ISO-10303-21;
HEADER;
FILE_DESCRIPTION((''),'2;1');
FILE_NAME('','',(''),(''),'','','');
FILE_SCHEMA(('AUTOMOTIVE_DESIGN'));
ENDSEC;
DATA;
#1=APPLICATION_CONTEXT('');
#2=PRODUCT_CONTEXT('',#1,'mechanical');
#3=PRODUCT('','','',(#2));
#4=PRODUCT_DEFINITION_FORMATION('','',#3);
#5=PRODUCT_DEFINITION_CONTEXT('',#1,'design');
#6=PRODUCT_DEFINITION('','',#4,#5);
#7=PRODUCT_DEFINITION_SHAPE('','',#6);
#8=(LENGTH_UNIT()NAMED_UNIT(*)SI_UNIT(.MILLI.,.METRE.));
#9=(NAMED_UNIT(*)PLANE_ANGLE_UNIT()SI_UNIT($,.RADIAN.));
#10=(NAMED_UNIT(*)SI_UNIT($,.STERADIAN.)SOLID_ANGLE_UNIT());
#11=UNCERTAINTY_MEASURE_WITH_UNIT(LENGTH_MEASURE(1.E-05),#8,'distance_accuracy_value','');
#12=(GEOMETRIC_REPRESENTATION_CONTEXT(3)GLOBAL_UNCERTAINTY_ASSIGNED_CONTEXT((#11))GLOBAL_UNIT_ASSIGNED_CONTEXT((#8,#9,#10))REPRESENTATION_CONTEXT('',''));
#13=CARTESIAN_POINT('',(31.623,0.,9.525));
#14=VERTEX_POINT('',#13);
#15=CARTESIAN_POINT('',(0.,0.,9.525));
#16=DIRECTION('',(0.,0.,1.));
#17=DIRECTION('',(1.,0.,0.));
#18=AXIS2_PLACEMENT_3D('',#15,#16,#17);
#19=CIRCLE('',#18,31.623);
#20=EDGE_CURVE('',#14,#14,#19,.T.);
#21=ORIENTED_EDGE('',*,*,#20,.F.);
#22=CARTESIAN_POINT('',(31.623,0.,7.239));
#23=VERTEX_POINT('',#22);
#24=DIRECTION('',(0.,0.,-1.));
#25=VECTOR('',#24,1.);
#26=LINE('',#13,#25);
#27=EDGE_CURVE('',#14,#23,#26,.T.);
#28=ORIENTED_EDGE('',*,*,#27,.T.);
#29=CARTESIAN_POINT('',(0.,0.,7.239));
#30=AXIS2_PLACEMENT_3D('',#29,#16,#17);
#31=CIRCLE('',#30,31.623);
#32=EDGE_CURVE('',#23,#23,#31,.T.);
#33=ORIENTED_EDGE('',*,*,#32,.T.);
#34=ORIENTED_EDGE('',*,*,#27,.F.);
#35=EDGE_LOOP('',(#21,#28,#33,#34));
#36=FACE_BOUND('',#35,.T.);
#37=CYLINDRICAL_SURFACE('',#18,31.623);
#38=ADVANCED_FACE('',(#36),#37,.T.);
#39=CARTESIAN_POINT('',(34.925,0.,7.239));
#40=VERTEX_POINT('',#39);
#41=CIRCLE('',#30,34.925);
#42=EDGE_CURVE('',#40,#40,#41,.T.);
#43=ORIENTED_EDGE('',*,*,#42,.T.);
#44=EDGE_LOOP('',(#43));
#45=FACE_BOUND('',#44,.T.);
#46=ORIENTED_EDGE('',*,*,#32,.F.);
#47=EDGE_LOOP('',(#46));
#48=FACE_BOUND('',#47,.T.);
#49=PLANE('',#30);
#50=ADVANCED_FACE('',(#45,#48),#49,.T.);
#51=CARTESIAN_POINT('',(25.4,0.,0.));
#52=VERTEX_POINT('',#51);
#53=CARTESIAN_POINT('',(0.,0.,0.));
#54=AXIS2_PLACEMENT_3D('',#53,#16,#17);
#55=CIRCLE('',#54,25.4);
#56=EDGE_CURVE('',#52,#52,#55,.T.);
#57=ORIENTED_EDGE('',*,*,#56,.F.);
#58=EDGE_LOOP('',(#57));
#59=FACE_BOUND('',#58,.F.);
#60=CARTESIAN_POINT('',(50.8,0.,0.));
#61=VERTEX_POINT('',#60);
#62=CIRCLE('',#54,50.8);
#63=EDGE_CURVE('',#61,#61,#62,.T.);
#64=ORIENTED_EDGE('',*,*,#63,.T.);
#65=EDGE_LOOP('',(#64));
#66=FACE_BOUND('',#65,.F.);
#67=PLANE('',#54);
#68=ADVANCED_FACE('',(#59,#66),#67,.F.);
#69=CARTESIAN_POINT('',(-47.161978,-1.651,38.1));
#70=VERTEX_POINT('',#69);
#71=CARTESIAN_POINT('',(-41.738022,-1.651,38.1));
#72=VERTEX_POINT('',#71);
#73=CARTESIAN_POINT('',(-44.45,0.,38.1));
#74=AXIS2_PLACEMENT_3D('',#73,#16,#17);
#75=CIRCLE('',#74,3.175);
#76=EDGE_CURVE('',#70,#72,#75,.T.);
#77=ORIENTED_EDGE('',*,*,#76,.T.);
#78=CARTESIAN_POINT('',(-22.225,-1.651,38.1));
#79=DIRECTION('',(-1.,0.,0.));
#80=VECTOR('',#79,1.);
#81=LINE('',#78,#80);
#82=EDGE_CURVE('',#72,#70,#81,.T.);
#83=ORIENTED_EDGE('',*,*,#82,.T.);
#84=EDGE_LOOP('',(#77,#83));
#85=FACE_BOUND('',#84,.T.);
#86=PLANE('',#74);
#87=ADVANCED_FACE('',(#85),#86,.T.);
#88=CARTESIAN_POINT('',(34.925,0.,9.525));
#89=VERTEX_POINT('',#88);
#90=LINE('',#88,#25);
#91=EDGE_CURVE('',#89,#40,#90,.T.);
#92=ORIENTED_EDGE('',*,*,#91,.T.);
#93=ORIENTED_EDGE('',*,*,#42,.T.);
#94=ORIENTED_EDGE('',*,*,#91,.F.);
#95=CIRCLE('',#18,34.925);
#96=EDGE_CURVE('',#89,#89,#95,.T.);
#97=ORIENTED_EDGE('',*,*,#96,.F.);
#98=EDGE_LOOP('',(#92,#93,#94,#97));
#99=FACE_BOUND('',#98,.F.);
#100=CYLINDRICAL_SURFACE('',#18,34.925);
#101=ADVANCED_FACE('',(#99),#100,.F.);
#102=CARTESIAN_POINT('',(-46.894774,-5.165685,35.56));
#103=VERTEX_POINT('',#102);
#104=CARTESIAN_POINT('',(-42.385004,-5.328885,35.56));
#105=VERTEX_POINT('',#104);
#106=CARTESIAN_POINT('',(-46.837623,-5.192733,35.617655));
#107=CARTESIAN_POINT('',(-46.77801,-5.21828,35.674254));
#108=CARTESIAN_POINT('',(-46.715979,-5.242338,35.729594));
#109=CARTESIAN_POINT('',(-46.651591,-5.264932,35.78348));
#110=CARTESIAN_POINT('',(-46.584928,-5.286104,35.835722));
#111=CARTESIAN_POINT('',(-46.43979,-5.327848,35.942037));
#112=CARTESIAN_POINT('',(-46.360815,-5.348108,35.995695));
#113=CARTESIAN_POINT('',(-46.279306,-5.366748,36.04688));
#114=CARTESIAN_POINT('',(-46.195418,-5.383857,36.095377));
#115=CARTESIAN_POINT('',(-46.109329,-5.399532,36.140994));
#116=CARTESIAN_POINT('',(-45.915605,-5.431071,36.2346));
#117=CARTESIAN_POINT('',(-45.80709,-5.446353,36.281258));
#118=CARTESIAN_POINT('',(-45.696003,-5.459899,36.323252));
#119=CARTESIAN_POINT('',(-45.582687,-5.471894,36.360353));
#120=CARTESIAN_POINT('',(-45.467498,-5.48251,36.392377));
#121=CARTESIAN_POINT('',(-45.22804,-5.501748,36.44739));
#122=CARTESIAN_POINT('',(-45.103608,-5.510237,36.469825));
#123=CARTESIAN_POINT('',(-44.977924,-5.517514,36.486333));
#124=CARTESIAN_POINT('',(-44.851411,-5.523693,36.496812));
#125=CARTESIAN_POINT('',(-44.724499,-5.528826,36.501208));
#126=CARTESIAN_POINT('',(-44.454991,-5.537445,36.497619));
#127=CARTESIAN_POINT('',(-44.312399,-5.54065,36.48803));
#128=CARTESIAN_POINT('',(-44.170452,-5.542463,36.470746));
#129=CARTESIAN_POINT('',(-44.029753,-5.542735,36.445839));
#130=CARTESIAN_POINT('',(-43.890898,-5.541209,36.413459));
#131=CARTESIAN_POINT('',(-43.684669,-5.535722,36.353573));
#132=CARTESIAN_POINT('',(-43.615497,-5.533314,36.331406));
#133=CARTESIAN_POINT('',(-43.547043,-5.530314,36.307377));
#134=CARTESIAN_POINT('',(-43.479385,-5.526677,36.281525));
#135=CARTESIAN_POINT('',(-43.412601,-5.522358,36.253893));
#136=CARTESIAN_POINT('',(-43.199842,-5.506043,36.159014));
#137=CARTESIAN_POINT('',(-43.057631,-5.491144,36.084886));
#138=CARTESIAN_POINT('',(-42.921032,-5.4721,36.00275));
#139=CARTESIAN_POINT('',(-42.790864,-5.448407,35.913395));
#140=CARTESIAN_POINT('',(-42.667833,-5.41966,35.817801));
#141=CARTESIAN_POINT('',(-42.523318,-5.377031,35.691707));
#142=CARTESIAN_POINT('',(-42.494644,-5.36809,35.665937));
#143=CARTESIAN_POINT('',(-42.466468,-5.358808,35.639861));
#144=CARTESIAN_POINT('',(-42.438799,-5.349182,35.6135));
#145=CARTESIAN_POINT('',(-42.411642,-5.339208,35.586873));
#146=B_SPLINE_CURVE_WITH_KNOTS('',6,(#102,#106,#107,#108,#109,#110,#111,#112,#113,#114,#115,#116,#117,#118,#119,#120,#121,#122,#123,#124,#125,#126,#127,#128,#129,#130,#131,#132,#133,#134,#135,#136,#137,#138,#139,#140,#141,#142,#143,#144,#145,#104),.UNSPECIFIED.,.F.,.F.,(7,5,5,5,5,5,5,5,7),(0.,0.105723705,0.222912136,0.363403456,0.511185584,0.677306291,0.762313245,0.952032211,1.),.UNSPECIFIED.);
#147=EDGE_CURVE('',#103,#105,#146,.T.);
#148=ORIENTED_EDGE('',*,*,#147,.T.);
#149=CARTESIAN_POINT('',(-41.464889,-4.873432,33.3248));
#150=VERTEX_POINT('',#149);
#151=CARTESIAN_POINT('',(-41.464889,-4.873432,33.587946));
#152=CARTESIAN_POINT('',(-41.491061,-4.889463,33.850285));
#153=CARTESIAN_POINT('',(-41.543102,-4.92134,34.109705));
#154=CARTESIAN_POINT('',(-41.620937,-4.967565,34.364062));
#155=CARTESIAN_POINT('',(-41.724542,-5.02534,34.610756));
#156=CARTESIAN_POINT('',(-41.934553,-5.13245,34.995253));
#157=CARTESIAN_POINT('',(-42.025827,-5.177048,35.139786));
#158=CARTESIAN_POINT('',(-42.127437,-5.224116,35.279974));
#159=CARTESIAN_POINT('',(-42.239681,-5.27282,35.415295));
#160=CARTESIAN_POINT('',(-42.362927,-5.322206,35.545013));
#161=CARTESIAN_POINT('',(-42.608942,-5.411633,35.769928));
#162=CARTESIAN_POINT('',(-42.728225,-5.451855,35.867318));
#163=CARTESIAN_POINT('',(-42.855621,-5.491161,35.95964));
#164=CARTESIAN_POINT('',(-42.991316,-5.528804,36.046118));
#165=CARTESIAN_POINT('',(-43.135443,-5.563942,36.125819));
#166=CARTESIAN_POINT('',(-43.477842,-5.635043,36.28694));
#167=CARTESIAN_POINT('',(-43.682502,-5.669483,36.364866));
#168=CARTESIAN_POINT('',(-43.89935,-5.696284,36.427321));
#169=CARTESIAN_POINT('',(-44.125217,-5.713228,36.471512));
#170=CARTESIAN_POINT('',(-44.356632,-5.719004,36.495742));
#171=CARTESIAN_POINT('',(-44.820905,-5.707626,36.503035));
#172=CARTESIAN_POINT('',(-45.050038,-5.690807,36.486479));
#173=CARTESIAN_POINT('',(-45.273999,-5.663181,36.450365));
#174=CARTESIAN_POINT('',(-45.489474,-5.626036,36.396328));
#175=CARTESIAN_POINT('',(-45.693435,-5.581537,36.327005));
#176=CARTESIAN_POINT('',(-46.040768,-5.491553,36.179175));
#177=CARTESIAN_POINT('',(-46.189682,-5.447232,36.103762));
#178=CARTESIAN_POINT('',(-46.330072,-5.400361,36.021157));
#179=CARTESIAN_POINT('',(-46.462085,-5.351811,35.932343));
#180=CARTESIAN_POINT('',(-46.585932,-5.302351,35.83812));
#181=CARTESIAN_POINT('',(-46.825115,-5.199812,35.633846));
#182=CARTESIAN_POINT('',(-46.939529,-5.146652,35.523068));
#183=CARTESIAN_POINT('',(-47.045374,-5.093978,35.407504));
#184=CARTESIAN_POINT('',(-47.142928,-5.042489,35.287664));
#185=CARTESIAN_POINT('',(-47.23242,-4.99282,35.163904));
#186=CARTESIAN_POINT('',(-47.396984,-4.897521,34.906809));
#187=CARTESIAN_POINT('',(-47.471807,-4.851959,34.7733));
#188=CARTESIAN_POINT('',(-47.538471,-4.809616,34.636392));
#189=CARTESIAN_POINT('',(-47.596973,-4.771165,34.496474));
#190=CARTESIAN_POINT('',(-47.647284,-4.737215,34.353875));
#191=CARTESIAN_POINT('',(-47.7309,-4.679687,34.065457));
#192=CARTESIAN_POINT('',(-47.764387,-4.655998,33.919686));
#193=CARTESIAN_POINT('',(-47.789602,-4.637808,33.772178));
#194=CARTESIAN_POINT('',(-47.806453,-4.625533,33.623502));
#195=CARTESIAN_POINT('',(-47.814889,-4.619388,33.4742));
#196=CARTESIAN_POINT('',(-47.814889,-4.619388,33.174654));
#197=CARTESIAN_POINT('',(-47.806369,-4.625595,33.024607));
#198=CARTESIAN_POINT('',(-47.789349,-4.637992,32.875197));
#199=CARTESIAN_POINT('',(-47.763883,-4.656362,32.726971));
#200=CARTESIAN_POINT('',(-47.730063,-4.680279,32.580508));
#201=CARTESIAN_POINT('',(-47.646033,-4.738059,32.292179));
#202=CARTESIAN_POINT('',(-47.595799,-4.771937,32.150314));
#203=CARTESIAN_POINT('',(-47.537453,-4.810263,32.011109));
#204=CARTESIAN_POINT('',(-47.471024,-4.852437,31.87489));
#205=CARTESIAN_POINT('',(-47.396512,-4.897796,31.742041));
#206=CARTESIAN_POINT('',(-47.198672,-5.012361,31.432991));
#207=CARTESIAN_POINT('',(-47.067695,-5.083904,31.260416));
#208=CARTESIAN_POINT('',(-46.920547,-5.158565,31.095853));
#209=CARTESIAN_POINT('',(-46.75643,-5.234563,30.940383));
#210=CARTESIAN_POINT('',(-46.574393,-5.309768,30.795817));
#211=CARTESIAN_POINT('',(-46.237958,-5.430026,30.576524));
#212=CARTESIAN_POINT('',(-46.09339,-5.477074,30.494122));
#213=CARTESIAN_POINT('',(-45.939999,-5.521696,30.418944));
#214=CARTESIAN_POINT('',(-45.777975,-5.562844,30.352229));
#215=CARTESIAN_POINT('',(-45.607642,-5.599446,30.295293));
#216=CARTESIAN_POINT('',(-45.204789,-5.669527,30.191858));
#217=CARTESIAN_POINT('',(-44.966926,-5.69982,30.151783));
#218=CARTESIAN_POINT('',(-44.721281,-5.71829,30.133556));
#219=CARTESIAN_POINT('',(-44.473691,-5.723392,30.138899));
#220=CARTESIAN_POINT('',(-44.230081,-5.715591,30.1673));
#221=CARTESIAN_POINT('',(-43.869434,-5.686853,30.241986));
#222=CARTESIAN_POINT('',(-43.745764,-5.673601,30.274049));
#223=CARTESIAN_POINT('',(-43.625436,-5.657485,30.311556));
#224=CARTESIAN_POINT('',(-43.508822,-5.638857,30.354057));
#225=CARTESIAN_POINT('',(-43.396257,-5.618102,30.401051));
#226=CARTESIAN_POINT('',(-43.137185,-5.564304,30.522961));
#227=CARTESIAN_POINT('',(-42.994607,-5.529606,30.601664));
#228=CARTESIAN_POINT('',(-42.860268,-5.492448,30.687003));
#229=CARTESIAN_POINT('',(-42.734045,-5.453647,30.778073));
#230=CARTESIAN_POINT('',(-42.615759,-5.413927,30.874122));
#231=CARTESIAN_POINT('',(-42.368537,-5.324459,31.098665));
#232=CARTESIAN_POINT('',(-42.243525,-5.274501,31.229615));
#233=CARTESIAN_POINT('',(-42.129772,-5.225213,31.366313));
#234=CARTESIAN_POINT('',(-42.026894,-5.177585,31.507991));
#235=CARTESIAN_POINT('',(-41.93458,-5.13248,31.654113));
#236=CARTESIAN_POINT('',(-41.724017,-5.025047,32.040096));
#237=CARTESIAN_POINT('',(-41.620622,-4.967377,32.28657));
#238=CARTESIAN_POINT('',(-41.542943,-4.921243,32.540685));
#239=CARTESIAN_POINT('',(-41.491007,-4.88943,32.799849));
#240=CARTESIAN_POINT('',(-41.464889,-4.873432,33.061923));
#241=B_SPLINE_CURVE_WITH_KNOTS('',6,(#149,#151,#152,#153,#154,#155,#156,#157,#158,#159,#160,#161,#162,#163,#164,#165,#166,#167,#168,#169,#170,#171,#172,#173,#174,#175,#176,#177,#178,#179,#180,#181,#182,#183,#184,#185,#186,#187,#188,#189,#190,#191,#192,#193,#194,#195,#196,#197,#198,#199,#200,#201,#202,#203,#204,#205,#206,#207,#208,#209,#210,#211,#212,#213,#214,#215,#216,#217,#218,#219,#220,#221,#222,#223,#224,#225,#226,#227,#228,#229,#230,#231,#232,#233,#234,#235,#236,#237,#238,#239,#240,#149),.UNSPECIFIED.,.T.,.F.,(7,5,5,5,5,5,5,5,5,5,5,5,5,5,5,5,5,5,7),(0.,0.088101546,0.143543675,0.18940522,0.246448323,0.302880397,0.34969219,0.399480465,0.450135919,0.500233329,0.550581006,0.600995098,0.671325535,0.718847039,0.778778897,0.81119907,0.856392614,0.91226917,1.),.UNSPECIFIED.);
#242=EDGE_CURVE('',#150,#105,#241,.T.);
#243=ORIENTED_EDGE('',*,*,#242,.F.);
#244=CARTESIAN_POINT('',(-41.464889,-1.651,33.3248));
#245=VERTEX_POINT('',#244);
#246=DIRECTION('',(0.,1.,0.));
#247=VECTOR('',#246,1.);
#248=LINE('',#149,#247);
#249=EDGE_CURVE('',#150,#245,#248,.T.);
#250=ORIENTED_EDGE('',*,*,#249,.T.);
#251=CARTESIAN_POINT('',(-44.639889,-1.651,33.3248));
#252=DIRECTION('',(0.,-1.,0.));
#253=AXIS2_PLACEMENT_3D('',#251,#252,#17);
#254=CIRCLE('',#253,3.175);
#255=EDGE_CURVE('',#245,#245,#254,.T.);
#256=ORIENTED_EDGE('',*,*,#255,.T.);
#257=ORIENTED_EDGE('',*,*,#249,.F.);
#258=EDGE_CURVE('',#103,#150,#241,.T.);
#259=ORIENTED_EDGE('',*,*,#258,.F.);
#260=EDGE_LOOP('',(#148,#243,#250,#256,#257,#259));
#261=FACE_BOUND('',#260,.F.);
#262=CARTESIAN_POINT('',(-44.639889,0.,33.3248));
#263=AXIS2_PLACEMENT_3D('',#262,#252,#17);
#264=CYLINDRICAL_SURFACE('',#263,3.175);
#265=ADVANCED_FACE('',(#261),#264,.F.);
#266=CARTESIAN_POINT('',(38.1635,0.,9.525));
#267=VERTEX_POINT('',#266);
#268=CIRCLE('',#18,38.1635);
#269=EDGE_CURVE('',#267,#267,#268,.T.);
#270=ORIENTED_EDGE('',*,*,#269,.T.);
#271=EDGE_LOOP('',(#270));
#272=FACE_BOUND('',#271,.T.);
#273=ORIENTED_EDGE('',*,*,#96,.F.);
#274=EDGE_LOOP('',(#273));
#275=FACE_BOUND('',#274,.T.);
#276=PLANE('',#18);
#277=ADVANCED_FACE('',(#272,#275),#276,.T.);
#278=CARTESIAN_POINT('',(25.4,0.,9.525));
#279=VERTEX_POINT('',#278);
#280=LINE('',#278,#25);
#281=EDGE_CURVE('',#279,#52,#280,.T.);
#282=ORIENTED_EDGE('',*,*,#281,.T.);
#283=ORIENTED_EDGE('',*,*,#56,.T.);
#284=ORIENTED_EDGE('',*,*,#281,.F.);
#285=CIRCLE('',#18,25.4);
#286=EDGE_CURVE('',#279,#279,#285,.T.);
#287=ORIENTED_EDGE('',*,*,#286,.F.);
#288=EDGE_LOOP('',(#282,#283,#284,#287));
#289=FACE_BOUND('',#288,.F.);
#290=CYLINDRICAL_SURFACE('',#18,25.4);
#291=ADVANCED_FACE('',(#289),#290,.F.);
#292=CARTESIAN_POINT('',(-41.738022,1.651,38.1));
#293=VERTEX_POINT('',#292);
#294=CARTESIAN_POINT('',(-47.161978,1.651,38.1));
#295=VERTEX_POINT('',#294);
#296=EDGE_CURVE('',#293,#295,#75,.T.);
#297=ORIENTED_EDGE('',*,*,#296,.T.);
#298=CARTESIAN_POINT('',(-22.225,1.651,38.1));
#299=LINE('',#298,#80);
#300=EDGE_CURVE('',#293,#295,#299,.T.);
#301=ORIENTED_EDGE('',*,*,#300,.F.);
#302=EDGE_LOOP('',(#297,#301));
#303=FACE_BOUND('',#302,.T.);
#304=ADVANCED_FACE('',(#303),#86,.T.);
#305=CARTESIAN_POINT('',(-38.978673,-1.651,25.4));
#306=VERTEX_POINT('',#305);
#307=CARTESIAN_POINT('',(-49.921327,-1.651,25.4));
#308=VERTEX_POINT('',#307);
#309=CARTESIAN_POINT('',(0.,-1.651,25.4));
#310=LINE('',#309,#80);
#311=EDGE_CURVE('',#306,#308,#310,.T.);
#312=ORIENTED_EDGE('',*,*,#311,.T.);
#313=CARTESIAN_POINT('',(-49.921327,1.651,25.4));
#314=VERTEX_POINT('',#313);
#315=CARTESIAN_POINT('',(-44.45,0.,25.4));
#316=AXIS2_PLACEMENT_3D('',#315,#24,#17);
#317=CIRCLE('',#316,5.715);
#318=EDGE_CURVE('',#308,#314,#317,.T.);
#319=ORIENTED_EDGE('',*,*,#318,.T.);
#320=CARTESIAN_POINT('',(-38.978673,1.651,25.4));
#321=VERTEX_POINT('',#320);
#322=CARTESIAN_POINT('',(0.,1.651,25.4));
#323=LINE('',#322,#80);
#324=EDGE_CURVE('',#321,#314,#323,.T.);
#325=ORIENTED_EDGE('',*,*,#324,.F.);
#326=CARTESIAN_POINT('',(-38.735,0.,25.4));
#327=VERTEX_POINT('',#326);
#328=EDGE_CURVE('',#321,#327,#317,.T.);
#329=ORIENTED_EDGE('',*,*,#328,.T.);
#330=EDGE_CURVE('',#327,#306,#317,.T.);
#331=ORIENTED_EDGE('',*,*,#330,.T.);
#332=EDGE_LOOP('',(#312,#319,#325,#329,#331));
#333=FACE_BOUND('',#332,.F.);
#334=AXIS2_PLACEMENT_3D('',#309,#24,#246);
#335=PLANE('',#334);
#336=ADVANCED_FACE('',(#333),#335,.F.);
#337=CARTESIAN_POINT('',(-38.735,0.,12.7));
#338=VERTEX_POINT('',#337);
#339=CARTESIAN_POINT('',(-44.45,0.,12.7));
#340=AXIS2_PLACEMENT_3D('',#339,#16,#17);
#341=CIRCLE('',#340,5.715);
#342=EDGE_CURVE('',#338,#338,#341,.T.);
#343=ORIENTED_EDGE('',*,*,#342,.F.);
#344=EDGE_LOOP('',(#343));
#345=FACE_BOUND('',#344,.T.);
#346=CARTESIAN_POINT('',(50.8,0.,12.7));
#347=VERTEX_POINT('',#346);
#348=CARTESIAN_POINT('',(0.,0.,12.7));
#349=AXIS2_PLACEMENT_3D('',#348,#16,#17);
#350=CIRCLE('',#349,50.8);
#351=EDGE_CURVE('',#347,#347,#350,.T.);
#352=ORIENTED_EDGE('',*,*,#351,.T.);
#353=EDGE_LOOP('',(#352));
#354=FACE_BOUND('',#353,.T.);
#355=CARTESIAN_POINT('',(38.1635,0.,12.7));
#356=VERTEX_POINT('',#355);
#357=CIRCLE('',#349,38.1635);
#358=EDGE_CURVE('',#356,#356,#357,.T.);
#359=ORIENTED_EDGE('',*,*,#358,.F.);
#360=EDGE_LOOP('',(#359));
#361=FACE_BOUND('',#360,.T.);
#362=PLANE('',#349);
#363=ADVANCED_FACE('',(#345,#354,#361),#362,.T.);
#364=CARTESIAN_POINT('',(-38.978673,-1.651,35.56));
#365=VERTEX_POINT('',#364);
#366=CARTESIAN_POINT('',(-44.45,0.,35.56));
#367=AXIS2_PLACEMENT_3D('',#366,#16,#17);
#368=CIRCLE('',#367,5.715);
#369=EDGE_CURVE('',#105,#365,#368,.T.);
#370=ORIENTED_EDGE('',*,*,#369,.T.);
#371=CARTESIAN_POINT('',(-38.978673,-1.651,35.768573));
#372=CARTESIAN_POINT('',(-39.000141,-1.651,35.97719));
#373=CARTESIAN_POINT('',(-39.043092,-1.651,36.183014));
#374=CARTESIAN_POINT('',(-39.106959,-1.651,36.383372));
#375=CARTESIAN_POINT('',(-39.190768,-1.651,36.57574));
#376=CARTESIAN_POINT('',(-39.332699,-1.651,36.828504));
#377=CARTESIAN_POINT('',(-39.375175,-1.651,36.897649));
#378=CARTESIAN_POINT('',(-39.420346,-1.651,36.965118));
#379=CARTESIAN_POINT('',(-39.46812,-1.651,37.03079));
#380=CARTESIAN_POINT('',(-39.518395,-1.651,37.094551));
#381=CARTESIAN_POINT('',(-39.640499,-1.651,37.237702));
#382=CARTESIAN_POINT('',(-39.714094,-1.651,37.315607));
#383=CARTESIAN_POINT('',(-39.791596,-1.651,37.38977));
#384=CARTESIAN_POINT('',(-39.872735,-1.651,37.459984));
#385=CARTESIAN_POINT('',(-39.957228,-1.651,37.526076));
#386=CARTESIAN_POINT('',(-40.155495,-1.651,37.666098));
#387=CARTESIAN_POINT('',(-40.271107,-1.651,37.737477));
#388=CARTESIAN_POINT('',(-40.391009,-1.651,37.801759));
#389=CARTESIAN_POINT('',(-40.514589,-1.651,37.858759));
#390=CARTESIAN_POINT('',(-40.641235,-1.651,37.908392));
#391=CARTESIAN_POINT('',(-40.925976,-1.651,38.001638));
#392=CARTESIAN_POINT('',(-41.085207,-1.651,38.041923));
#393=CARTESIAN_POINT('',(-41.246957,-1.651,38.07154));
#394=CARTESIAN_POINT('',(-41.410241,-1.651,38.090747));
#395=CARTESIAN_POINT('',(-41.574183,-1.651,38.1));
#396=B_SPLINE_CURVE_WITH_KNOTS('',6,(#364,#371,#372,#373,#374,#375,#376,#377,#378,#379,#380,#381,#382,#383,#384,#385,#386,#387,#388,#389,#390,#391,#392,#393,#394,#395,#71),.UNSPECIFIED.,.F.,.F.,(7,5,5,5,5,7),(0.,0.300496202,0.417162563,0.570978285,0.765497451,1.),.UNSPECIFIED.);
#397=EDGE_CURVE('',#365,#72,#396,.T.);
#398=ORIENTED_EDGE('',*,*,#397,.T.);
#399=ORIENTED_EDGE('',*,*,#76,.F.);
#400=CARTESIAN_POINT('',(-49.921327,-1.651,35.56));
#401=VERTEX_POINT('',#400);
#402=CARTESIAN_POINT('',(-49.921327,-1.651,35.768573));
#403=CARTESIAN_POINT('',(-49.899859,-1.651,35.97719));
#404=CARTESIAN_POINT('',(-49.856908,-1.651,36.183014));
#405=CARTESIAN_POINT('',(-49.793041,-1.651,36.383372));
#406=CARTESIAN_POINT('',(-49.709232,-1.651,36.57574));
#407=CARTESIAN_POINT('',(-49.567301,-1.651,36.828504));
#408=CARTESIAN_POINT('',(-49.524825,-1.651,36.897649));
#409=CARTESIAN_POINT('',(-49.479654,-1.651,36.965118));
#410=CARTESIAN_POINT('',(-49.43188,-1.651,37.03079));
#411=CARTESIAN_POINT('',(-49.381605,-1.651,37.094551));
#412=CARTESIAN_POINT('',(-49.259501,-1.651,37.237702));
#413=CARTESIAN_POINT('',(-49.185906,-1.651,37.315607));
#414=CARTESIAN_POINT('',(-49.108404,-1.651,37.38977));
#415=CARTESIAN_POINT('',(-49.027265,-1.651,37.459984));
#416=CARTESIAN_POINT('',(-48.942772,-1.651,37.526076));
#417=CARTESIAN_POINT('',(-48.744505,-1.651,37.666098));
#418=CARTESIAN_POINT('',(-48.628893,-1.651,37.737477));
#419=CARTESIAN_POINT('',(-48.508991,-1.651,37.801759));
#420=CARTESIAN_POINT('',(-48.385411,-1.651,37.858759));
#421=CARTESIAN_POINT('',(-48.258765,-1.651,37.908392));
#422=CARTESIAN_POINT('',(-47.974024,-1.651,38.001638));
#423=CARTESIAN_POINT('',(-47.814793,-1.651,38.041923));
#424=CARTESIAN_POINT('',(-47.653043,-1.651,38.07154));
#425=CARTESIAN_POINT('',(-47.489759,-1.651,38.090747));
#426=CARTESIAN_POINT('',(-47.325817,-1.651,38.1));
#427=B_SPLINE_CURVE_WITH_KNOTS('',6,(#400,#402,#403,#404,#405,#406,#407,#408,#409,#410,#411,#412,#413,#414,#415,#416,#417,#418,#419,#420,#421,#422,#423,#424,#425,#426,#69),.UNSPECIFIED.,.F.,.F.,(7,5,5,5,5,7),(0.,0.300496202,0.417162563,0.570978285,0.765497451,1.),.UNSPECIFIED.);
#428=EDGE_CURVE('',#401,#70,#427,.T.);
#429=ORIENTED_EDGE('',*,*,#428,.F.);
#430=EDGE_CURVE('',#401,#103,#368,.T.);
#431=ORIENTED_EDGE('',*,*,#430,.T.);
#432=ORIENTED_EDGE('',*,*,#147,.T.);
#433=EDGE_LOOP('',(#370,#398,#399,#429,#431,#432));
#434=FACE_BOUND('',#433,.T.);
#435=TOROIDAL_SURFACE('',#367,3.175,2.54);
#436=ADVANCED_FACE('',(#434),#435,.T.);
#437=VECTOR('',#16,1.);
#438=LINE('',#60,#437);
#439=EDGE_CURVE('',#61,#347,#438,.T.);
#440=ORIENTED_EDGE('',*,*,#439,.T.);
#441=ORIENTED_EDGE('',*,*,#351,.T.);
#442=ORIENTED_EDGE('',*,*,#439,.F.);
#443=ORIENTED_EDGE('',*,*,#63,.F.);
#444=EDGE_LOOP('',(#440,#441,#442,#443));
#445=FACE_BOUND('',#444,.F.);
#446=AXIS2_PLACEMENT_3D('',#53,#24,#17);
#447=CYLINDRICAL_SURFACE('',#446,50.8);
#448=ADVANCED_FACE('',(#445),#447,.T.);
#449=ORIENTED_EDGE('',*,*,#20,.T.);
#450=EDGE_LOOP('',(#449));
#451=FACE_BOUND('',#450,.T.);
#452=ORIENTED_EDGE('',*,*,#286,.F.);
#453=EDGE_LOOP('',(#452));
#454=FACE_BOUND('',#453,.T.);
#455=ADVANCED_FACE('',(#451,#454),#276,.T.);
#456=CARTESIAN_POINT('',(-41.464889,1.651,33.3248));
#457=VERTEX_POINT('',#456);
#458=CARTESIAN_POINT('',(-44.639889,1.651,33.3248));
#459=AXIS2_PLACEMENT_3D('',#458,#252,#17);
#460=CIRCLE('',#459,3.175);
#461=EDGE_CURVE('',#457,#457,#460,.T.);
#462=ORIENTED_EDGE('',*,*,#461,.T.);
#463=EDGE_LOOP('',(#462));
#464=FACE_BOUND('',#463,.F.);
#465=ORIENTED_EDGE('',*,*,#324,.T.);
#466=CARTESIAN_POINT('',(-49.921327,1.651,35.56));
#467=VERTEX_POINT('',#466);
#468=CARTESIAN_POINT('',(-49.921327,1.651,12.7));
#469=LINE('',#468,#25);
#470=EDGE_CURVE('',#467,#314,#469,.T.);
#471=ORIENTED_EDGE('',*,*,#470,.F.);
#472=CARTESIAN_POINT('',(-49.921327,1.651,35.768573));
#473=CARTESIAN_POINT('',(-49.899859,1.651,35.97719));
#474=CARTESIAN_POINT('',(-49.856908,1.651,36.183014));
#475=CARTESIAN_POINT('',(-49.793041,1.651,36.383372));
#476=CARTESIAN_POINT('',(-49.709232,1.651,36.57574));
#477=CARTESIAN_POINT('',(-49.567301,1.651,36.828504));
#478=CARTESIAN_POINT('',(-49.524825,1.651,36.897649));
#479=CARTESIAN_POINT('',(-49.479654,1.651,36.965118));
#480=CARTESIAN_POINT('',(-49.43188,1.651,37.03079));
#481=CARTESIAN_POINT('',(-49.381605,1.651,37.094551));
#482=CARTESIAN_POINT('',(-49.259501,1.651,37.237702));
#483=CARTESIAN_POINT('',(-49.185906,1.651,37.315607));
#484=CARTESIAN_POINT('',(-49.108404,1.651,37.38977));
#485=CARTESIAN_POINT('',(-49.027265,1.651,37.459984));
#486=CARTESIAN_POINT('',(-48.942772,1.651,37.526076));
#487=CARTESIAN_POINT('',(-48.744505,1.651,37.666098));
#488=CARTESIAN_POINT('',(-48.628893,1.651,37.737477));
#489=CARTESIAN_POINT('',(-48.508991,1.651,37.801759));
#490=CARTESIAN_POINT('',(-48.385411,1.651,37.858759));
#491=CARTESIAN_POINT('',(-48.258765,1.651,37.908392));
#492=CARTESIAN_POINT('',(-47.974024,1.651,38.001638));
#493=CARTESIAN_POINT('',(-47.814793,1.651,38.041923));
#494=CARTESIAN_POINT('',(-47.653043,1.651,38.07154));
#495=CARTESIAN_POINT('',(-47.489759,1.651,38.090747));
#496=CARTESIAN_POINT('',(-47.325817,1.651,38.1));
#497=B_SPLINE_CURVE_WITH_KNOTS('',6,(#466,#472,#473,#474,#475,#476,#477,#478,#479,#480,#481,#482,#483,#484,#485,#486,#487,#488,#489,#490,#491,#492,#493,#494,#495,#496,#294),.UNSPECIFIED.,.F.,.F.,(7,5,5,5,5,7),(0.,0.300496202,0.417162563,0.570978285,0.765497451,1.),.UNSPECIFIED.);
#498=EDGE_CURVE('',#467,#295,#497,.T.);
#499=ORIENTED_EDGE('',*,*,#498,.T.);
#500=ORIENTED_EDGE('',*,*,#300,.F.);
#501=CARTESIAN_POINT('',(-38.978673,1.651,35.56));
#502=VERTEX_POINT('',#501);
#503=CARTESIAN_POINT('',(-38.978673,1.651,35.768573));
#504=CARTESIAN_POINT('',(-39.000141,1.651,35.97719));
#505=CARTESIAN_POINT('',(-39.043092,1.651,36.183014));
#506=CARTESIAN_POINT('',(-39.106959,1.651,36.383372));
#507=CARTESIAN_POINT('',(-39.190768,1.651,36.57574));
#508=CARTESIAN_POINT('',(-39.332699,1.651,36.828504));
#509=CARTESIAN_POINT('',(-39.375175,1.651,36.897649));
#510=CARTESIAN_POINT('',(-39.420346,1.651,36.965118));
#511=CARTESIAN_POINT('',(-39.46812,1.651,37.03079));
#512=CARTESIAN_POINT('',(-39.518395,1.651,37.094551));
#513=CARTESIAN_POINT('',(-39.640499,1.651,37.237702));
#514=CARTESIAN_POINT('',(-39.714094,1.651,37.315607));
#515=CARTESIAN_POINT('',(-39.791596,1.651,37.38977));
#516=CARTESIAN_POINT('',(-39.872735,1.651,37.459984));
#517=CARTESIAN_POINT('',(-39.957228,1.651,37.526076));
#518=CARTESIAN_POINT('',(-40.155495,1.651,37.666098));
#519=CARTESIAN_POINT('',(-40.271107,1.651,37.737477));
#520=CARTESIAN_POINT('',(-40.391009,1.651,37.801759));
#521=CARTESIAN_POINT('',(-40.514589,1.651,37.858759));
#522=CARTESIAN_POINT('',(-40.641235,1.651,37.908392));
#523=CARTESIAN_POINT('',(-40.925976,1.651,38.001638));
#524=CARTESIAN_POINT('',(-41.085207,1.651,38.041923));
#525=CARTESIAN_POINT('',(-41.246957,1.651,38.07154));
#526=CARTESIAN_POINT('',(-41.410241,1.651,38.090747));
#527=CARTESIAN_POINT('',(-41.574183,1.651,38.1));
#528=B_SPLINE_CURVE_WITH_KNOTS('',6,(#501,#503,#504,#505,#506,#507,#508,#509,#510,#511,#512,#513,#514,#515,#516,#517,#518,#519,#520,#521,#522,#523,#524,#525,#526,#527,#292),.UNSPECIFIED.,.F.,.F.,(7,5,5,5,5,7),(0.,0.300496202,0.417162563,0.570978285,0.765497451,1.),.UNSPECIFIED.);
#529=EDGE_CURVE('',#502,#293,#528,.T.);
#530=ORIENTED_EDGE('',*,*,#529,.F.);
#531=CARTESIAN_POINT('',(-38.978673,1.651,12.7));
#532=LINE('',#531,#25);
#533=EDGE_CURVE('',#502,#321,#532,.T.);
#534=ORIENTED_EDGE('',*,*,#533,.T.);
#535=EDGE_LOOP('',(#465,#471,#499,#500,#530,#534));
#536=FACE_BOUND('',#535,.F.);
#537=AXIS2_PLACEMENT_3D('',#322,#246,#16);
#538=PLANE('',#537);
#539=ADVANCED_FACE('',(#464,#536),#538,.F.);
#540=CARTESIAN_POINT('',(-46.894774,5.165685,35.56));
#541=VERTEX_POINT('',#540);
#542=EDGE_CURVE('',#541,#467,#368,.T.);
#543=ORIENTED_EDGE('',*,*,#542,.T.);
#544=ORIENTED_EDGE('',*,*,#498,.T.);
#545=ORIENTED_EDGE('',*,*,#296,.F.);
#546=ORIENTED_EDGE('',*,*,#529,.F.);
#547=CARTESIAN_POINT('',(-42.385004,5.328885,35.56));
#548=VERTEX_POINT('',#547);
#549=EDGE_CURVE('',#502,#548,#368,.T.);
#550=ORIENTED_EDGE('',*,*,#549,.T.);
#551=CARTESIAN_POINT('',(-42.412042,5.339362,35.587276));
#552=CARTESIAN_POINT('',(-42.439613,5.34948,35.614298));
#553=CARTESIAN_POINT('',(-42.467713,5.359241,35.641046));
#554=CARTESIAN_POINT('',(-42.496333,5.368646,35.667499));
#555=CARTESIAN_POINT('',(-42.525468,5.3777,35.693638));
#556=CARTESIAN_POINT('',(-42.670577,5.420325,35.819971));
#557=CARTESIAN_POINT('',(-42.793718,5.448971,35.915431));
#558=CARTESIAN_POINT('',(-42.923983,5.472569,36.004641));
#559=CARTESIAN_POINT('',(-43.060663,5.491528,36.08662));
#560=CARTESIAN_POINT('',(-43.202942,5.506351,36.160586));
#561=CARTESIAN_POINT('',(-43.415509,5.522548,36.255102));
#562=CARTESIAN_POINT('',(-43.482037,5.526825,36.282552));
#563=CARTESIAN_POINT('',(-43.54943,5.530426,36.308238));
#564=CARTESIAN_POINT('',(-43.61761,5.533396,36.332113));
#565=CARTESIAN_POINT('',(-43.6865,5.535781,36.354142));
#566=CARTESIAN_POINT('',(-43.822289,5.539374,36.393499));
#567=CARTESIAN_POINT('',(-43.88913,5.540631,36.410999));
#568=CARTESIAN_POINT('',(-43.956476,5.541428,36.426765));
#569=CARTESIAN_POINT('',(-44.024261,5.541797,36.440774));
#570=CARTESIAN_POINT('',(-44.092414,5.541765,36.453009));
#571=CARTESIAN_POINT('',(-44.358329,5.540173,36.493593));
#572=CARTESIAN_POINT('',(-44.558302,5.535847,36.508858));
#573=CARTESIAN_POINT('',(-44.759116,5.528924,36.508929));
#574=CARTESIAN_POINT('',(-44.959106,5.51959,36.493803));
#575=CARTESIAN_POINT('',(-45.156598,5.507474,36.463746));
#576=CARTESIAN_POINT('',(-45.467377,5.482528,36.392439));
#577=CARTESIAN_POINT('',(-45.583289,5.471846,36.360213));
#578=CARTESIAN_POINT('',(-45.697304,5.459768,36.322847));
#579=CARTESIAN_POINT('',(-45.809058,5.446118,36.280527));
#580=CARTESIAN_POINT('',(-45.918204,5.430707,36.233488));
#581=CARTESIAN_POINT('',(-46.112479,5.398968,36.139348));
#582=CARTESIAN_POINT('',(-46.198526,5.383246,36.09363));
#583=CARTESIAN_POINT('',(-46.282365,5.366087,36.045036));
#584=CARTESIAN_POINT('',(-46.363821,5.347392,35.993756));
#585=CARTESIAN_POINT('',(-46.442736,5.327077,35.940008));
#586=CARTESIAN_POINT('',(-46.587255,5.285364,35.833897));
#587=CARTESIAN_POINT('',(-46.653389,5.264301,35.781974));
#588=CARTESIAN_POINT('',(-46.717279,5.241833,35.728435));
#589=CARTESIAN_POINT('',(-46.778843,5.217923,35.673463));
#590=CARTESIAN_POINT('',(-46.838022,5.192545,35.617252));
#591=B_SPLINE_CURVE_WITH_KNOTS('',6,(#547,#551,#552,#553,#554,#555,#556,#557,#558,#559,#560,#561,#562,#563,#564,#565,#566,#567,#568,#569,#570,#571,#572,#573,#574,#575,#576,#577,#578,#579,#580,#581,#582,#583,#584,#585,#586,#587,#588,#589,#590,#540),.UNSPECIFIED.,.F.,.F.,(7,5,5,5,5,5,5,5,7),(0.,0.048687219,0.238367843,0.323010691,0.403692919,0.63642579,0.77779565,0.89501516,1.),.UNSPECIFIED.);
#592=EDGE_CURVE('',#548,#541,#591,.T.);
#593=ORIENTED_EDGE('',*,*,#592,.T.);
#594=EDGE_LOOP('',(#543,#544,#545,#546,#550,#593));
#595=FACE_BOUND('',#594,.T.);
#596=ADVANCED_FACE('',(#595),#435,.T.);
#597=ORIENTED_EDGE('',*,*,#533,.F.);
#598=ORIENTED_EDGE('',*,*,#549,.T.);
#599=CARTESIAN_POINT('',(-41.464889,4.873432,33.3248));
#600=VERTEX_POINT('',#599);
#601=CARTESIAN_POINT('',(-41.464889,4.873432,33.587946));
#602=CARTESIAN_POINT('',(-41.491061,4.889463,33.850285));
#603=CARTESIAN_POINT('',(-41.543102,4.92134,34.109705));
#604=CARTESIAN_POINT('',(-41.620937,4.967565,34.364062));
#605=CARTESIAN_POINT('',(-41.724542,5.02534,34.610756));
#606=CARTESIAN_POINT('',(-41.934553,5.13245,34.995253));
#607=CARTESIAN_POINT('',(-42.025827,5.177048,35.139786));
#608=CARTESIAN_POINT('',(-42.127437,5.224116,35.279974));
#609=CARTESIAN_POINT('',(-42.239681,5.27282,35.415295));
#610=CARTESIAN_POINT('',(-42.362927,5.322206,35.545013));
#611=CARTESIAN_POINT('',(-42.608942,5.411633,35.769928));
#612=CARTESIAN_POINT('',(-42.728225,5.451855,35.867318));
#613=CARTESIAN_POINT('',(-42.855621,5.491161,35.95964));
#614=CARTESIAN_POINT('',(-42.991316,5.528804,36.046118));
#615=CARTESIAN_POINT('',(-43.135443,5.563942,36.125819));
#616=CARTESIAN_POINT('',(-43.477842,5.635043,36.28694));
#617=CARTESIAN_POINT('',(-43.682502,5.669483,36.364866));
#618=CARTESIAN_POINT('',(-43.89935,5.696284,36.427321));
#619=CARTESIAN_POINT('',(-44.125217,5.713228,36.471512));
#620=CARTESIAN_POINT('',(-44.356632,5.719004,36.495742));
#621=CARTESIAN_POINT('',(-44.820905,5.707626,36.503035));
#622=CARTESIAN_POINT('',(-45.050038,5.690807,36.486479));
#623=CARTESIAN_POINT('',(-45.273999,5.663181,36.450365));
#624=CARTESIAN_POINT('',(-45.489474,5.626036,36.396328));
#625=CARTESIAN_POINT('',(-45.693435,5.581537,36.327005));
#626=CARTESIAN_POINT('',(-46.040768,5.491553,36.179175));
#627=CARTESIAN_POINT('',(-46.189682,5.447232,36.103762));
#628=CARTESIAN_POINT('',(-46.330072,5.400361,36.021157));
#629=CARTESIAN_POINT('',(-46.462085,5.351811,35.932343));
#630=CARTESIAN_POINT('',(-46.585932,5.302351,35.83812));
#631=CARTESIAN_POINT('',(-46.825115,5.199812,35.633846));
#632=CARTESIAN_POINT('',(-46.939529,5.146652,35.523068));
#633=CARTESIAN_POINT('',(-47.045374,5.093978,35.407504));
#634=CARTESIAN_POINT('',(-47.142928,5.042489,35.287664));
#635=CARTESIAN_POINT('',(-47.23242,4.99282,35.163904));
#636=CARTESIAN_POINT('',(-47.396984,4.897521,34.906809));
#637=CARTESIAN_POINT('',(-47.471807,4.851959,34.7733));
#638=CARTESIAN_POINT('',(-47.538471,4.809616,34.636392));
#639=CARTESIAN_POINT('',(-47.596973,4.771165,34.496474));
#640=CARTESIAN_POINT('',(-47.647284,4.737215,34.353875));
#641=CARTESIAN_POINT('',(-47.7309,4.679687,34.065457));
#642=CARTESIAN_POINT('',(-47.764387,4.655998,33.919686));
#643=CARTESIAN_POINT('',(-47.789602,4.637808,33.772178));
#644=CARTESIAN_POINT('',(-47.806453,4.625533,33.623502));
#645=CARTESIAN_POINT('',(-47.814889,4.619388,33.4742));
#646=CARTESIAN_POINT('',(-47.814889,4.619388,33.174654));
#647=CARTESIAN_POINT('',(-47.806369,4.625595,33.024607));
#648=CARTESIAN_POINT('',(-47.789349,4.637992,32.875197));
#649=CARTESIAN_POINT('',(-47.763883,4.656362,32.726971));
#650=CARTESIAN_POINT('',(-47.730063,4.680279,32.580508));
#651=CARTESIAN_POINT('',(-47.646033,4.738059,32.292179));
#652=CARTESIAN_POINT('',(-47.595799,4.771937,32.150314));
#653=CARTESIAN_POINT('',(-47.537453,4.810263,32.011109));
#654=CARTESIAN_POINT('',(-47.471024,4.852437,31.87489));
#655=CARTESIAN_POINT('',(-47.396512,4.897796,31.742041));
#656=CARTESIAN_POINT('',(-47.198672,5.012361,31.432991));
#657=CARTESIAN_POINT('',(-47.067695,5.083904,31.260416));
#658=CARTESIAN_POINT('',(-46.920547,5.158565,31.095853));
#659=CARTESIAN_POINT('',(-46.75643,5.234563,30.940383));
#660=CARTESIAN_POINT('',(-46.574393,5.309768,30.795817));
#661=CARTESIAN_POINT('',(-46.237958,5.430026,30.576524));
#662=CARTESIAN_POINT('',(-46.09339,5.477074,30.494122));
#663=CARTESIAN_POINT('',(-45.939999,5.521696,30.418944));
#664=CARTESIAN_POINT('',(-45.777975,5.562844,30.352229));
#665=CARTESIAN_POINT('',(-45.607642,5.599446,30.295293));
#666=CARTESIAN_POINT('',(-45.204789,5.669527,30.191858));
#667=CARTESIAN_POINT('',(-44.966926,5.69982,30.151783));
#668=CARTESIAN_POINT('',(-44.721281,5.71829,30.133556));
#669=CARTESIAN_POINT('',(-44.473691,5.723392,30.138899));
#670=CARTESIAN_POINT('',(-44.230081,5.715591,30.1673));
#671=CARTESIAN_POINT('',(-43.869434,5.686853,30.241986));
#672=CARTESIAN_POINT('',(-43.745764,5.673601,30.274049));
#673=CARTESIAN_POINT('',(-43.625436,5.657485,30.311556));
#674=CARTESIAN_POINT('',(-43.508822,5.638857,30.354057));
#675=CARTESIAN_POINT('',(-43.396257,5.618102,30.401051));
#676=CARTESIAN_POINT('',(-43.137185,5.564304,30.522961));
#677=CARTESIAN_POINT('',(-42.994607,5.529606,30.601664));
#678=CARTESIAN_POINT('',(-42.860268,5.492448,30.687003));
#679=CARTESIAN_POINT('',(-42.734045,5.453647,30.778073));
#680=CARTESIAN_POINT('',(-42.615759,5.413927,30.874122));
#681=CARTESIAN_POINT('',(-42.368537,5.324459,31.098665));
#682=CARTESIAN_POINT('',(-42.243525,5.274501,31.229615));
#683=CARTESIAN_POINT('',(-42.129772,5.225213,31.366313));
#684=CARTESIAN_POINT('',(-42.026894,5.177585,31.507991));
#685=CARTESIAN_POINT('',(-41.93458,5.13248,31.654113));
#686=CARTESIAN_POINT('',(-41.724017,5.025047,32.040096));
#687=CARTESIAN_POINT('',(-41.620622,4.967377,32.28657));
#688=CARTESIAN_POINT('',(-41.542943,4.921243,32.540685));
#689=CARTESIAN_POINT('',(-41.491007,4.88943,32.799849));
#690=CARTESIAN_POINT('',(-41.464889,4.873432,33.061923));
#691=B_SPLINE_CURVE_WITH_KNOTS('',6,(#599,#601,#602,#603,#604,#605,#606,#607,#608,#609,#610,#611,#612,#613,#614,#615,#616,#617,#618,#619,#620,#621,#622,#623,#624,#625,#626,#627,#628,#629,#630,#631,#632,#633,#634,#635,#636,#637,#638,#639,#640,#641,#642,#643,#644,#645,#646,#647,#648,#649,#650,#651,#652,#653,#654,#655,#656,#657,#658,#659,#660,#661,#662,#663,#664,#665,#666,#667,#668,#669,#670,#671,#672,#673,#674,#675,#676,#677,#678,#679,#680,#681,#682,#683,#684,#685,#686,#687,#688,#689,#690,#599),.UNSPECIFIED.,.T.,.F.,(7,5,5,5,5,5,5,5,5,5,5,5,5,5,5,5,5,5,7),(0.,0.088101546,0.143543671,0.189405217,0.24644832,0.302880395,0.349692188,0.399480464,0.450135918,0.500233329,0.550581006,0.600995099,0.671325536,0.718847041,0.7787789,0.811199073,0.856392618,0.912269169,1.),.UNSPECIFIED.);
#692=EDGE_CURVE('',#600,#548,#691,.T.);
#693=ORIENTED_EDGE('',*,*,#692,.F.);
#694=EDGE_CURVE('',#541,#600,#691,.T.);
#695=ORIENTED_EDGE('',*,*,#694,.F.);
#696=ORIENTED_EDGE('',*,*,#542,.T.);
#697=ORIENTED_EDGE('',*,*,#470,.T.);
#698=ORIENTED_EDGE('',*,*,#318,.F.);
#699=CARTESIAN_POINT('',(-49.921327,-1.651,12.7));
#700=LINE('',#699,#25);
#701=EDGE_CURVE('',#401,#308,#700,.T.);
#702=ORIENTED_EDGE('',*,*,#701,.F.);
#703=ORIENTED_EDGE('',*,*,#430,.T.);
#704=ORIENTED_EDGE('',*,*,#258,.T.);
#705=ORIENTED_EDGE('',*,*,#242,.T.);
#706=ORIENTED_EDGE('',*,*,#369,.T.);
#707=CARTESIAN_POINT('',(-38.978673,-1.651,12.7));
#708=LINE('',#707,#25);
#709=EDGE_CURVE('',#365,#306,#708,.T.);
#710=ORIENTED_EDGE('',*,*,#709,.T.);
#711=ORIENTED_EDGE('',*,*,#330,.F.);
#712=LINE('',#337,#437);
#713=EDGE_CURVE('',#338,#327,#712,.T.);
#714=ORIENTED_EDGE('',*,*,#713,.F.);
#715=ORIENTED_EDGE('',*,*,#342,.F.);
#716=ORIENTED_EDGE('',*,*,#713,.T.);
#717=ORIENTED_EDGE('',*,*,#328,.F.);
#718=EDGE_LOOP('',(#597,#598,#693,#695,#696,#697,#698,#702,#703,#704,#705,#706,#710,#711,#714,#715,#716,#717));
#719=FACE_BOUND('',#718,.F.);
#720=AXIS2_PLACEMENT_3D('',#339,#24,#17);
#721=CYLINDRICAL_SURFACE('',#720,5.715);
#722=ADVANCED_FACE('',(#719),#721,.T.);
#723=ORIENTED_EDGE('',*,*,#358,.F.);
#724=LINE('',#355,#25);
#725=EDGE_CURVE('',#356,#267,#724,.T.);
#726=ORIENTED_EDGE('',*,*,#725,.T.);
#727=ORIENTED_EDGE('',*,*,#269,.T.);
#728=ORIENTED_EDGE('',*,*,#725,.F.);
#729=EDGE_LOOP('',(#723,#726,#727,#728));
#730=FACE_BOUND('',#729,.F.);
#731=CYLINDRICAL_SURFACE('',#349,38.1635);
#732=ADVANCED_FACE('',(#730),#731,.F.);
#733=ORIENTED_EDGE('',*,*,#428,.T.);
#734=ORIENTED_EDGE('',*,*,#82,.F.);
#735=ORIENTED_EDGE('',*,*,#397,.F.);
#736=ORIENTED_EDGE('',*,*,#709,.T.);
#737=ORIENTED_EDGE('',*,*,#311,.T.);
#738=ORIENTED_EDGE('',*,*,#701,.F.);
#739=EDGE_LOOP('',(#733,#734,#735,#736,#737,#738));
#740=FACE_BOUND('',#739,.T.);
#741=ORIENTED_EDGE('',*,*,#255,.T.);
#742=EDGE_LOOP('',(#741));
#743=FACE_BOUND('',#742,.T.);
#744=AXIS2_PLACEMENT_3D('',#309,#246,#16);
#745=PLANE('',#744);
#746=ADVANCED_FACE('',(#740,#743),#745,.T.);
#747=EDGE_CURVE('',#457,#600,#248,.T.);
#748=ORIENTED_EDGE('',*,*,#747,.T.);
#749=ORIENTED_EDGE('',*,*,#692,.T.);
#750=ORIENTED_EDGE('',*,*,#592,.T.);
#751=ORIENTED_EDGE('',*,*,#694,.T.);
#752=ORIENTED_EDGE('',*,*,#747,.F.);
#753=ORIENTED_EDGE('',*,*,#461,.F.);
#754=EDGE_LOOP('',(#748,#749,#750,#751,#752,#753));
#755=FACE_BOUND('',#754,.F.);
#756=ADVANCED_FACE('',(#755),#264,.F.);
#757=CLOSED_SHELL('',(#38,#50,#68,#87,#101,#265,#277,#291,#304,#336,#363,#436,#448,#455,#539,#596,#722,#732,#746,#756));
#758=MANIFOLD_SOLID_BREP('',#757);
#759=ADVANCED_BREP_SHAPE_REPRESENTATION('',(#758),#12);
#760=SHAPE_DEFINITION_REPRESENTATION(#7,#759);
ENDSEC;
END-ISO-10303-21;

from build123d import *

# Parameters (mm, degrees)
F0_R           = 50.8
F1_DEPTH       = 12.7
F2_R           = 38.1635
F3_DEPTH       = 3.175
F4_R           = 34.925
F4_R_2         = 31.623
F5_DEPTH       = 2.286
F4_R_3         = 25.4
F6_DEPTH       = 9.526
F8_R           = 5.715
F9_DEPTH       = 25.4
F10_R          = 3.175
F11_DEPTH      = 50.801
F11_DEPTH_BACK = 25.4
F13_W          = 3.302
F13_H          = 15.8052066865
F14_DEPTH      = 50.801


# Not quite as in the source:
# - a fillet or chamfer that OpenCascade refuses, or shapes differently, is made with other operations: its cross-section is extruded or revolved along the edge and cut away or added


with BuildPart() as f1:
    # F0 (on Top) → F1 (new body)
    with BuildSketch(Plane.XY):
        Circle(F0_R)
    extrude(amount=F1_DEPTH)

    # F2 (on face) → F3 (cut)
    with BuildSketch(Plane.XY.offset(12.7)):
        Circle(F2_R)
    extrude(amount=-F3_DEPTH, mode=Mode.SUBTRACT)

    # F4 (on face) → F5 (cut)
    with BuildSketch(Plane.XY.offset(9.525)):
        Circle(F4_R)
        Circle(F4_R_2, mode=Mode.SUBTRACT)
    extrude(amount=-F5_DEPTH, mode=Mode.SUBTRACT)

    # F4 (on face) → F6 (cut, through all)
    with BuildSketch(Plane.XY.offset(9.525)):
        Circle(F4_R_3)
    extrude(amount=-F6_DEPTH, mode=Mode.SUBTRACT)

    # F8 (on offset) → F9 (join)
    with BuildSketch(Plane.XY.offset(12.7)):
        with Locations((-44.45, 0)):
            Circle(F8_R)
    extrude(amount=F9_DEPTH)

    # F10 (on Front) → F11 (cut, two sides)
    with BuildSketch(Plane.XZ) as f11_sk:
        with Locations((-44.6398891509, 33.3248)):
            Circle(F10_R)
    extrude(amount=F11_DEPTH, mode=Mode.SUBTRACT)
    extrude(f11_sk.sketch, amount=-F11_DEPTH_BACK, mode=Mode.SUBTRACT)

    # F12: fillet of radius 2.54 on 1 edges, made by hand

    # F12_s1 → F12_t2 (revolve, cut)
    with BuildSketch(Plane.XZ):
        with BuildLine():
            ThreePointArc((-38.735, 35.56), (-39.4789487758, 37.3560512242), (-41.275, 38.1))
            Line((-41.275, 38.1), (-38.735, 38.1))
            Line((-38.735, 38.1), (-38.735, 35.56))
        make_face()
    revolve(axis=Axis((-44.45, 0, 38.1), (0, 0, 1)), mode=Mode.SUBTRACT)

    # F13 (on Right) → F14 (cut, through all)
    with BuildSketch(Plane.YZ):
        with Locations((0, 33.3026033432)):
            Rectangle(F13_W, F13_H)
    extrude(amount=-F14_DEPTH, mode=Mode.SUBTRACT)


solid = f1.part
